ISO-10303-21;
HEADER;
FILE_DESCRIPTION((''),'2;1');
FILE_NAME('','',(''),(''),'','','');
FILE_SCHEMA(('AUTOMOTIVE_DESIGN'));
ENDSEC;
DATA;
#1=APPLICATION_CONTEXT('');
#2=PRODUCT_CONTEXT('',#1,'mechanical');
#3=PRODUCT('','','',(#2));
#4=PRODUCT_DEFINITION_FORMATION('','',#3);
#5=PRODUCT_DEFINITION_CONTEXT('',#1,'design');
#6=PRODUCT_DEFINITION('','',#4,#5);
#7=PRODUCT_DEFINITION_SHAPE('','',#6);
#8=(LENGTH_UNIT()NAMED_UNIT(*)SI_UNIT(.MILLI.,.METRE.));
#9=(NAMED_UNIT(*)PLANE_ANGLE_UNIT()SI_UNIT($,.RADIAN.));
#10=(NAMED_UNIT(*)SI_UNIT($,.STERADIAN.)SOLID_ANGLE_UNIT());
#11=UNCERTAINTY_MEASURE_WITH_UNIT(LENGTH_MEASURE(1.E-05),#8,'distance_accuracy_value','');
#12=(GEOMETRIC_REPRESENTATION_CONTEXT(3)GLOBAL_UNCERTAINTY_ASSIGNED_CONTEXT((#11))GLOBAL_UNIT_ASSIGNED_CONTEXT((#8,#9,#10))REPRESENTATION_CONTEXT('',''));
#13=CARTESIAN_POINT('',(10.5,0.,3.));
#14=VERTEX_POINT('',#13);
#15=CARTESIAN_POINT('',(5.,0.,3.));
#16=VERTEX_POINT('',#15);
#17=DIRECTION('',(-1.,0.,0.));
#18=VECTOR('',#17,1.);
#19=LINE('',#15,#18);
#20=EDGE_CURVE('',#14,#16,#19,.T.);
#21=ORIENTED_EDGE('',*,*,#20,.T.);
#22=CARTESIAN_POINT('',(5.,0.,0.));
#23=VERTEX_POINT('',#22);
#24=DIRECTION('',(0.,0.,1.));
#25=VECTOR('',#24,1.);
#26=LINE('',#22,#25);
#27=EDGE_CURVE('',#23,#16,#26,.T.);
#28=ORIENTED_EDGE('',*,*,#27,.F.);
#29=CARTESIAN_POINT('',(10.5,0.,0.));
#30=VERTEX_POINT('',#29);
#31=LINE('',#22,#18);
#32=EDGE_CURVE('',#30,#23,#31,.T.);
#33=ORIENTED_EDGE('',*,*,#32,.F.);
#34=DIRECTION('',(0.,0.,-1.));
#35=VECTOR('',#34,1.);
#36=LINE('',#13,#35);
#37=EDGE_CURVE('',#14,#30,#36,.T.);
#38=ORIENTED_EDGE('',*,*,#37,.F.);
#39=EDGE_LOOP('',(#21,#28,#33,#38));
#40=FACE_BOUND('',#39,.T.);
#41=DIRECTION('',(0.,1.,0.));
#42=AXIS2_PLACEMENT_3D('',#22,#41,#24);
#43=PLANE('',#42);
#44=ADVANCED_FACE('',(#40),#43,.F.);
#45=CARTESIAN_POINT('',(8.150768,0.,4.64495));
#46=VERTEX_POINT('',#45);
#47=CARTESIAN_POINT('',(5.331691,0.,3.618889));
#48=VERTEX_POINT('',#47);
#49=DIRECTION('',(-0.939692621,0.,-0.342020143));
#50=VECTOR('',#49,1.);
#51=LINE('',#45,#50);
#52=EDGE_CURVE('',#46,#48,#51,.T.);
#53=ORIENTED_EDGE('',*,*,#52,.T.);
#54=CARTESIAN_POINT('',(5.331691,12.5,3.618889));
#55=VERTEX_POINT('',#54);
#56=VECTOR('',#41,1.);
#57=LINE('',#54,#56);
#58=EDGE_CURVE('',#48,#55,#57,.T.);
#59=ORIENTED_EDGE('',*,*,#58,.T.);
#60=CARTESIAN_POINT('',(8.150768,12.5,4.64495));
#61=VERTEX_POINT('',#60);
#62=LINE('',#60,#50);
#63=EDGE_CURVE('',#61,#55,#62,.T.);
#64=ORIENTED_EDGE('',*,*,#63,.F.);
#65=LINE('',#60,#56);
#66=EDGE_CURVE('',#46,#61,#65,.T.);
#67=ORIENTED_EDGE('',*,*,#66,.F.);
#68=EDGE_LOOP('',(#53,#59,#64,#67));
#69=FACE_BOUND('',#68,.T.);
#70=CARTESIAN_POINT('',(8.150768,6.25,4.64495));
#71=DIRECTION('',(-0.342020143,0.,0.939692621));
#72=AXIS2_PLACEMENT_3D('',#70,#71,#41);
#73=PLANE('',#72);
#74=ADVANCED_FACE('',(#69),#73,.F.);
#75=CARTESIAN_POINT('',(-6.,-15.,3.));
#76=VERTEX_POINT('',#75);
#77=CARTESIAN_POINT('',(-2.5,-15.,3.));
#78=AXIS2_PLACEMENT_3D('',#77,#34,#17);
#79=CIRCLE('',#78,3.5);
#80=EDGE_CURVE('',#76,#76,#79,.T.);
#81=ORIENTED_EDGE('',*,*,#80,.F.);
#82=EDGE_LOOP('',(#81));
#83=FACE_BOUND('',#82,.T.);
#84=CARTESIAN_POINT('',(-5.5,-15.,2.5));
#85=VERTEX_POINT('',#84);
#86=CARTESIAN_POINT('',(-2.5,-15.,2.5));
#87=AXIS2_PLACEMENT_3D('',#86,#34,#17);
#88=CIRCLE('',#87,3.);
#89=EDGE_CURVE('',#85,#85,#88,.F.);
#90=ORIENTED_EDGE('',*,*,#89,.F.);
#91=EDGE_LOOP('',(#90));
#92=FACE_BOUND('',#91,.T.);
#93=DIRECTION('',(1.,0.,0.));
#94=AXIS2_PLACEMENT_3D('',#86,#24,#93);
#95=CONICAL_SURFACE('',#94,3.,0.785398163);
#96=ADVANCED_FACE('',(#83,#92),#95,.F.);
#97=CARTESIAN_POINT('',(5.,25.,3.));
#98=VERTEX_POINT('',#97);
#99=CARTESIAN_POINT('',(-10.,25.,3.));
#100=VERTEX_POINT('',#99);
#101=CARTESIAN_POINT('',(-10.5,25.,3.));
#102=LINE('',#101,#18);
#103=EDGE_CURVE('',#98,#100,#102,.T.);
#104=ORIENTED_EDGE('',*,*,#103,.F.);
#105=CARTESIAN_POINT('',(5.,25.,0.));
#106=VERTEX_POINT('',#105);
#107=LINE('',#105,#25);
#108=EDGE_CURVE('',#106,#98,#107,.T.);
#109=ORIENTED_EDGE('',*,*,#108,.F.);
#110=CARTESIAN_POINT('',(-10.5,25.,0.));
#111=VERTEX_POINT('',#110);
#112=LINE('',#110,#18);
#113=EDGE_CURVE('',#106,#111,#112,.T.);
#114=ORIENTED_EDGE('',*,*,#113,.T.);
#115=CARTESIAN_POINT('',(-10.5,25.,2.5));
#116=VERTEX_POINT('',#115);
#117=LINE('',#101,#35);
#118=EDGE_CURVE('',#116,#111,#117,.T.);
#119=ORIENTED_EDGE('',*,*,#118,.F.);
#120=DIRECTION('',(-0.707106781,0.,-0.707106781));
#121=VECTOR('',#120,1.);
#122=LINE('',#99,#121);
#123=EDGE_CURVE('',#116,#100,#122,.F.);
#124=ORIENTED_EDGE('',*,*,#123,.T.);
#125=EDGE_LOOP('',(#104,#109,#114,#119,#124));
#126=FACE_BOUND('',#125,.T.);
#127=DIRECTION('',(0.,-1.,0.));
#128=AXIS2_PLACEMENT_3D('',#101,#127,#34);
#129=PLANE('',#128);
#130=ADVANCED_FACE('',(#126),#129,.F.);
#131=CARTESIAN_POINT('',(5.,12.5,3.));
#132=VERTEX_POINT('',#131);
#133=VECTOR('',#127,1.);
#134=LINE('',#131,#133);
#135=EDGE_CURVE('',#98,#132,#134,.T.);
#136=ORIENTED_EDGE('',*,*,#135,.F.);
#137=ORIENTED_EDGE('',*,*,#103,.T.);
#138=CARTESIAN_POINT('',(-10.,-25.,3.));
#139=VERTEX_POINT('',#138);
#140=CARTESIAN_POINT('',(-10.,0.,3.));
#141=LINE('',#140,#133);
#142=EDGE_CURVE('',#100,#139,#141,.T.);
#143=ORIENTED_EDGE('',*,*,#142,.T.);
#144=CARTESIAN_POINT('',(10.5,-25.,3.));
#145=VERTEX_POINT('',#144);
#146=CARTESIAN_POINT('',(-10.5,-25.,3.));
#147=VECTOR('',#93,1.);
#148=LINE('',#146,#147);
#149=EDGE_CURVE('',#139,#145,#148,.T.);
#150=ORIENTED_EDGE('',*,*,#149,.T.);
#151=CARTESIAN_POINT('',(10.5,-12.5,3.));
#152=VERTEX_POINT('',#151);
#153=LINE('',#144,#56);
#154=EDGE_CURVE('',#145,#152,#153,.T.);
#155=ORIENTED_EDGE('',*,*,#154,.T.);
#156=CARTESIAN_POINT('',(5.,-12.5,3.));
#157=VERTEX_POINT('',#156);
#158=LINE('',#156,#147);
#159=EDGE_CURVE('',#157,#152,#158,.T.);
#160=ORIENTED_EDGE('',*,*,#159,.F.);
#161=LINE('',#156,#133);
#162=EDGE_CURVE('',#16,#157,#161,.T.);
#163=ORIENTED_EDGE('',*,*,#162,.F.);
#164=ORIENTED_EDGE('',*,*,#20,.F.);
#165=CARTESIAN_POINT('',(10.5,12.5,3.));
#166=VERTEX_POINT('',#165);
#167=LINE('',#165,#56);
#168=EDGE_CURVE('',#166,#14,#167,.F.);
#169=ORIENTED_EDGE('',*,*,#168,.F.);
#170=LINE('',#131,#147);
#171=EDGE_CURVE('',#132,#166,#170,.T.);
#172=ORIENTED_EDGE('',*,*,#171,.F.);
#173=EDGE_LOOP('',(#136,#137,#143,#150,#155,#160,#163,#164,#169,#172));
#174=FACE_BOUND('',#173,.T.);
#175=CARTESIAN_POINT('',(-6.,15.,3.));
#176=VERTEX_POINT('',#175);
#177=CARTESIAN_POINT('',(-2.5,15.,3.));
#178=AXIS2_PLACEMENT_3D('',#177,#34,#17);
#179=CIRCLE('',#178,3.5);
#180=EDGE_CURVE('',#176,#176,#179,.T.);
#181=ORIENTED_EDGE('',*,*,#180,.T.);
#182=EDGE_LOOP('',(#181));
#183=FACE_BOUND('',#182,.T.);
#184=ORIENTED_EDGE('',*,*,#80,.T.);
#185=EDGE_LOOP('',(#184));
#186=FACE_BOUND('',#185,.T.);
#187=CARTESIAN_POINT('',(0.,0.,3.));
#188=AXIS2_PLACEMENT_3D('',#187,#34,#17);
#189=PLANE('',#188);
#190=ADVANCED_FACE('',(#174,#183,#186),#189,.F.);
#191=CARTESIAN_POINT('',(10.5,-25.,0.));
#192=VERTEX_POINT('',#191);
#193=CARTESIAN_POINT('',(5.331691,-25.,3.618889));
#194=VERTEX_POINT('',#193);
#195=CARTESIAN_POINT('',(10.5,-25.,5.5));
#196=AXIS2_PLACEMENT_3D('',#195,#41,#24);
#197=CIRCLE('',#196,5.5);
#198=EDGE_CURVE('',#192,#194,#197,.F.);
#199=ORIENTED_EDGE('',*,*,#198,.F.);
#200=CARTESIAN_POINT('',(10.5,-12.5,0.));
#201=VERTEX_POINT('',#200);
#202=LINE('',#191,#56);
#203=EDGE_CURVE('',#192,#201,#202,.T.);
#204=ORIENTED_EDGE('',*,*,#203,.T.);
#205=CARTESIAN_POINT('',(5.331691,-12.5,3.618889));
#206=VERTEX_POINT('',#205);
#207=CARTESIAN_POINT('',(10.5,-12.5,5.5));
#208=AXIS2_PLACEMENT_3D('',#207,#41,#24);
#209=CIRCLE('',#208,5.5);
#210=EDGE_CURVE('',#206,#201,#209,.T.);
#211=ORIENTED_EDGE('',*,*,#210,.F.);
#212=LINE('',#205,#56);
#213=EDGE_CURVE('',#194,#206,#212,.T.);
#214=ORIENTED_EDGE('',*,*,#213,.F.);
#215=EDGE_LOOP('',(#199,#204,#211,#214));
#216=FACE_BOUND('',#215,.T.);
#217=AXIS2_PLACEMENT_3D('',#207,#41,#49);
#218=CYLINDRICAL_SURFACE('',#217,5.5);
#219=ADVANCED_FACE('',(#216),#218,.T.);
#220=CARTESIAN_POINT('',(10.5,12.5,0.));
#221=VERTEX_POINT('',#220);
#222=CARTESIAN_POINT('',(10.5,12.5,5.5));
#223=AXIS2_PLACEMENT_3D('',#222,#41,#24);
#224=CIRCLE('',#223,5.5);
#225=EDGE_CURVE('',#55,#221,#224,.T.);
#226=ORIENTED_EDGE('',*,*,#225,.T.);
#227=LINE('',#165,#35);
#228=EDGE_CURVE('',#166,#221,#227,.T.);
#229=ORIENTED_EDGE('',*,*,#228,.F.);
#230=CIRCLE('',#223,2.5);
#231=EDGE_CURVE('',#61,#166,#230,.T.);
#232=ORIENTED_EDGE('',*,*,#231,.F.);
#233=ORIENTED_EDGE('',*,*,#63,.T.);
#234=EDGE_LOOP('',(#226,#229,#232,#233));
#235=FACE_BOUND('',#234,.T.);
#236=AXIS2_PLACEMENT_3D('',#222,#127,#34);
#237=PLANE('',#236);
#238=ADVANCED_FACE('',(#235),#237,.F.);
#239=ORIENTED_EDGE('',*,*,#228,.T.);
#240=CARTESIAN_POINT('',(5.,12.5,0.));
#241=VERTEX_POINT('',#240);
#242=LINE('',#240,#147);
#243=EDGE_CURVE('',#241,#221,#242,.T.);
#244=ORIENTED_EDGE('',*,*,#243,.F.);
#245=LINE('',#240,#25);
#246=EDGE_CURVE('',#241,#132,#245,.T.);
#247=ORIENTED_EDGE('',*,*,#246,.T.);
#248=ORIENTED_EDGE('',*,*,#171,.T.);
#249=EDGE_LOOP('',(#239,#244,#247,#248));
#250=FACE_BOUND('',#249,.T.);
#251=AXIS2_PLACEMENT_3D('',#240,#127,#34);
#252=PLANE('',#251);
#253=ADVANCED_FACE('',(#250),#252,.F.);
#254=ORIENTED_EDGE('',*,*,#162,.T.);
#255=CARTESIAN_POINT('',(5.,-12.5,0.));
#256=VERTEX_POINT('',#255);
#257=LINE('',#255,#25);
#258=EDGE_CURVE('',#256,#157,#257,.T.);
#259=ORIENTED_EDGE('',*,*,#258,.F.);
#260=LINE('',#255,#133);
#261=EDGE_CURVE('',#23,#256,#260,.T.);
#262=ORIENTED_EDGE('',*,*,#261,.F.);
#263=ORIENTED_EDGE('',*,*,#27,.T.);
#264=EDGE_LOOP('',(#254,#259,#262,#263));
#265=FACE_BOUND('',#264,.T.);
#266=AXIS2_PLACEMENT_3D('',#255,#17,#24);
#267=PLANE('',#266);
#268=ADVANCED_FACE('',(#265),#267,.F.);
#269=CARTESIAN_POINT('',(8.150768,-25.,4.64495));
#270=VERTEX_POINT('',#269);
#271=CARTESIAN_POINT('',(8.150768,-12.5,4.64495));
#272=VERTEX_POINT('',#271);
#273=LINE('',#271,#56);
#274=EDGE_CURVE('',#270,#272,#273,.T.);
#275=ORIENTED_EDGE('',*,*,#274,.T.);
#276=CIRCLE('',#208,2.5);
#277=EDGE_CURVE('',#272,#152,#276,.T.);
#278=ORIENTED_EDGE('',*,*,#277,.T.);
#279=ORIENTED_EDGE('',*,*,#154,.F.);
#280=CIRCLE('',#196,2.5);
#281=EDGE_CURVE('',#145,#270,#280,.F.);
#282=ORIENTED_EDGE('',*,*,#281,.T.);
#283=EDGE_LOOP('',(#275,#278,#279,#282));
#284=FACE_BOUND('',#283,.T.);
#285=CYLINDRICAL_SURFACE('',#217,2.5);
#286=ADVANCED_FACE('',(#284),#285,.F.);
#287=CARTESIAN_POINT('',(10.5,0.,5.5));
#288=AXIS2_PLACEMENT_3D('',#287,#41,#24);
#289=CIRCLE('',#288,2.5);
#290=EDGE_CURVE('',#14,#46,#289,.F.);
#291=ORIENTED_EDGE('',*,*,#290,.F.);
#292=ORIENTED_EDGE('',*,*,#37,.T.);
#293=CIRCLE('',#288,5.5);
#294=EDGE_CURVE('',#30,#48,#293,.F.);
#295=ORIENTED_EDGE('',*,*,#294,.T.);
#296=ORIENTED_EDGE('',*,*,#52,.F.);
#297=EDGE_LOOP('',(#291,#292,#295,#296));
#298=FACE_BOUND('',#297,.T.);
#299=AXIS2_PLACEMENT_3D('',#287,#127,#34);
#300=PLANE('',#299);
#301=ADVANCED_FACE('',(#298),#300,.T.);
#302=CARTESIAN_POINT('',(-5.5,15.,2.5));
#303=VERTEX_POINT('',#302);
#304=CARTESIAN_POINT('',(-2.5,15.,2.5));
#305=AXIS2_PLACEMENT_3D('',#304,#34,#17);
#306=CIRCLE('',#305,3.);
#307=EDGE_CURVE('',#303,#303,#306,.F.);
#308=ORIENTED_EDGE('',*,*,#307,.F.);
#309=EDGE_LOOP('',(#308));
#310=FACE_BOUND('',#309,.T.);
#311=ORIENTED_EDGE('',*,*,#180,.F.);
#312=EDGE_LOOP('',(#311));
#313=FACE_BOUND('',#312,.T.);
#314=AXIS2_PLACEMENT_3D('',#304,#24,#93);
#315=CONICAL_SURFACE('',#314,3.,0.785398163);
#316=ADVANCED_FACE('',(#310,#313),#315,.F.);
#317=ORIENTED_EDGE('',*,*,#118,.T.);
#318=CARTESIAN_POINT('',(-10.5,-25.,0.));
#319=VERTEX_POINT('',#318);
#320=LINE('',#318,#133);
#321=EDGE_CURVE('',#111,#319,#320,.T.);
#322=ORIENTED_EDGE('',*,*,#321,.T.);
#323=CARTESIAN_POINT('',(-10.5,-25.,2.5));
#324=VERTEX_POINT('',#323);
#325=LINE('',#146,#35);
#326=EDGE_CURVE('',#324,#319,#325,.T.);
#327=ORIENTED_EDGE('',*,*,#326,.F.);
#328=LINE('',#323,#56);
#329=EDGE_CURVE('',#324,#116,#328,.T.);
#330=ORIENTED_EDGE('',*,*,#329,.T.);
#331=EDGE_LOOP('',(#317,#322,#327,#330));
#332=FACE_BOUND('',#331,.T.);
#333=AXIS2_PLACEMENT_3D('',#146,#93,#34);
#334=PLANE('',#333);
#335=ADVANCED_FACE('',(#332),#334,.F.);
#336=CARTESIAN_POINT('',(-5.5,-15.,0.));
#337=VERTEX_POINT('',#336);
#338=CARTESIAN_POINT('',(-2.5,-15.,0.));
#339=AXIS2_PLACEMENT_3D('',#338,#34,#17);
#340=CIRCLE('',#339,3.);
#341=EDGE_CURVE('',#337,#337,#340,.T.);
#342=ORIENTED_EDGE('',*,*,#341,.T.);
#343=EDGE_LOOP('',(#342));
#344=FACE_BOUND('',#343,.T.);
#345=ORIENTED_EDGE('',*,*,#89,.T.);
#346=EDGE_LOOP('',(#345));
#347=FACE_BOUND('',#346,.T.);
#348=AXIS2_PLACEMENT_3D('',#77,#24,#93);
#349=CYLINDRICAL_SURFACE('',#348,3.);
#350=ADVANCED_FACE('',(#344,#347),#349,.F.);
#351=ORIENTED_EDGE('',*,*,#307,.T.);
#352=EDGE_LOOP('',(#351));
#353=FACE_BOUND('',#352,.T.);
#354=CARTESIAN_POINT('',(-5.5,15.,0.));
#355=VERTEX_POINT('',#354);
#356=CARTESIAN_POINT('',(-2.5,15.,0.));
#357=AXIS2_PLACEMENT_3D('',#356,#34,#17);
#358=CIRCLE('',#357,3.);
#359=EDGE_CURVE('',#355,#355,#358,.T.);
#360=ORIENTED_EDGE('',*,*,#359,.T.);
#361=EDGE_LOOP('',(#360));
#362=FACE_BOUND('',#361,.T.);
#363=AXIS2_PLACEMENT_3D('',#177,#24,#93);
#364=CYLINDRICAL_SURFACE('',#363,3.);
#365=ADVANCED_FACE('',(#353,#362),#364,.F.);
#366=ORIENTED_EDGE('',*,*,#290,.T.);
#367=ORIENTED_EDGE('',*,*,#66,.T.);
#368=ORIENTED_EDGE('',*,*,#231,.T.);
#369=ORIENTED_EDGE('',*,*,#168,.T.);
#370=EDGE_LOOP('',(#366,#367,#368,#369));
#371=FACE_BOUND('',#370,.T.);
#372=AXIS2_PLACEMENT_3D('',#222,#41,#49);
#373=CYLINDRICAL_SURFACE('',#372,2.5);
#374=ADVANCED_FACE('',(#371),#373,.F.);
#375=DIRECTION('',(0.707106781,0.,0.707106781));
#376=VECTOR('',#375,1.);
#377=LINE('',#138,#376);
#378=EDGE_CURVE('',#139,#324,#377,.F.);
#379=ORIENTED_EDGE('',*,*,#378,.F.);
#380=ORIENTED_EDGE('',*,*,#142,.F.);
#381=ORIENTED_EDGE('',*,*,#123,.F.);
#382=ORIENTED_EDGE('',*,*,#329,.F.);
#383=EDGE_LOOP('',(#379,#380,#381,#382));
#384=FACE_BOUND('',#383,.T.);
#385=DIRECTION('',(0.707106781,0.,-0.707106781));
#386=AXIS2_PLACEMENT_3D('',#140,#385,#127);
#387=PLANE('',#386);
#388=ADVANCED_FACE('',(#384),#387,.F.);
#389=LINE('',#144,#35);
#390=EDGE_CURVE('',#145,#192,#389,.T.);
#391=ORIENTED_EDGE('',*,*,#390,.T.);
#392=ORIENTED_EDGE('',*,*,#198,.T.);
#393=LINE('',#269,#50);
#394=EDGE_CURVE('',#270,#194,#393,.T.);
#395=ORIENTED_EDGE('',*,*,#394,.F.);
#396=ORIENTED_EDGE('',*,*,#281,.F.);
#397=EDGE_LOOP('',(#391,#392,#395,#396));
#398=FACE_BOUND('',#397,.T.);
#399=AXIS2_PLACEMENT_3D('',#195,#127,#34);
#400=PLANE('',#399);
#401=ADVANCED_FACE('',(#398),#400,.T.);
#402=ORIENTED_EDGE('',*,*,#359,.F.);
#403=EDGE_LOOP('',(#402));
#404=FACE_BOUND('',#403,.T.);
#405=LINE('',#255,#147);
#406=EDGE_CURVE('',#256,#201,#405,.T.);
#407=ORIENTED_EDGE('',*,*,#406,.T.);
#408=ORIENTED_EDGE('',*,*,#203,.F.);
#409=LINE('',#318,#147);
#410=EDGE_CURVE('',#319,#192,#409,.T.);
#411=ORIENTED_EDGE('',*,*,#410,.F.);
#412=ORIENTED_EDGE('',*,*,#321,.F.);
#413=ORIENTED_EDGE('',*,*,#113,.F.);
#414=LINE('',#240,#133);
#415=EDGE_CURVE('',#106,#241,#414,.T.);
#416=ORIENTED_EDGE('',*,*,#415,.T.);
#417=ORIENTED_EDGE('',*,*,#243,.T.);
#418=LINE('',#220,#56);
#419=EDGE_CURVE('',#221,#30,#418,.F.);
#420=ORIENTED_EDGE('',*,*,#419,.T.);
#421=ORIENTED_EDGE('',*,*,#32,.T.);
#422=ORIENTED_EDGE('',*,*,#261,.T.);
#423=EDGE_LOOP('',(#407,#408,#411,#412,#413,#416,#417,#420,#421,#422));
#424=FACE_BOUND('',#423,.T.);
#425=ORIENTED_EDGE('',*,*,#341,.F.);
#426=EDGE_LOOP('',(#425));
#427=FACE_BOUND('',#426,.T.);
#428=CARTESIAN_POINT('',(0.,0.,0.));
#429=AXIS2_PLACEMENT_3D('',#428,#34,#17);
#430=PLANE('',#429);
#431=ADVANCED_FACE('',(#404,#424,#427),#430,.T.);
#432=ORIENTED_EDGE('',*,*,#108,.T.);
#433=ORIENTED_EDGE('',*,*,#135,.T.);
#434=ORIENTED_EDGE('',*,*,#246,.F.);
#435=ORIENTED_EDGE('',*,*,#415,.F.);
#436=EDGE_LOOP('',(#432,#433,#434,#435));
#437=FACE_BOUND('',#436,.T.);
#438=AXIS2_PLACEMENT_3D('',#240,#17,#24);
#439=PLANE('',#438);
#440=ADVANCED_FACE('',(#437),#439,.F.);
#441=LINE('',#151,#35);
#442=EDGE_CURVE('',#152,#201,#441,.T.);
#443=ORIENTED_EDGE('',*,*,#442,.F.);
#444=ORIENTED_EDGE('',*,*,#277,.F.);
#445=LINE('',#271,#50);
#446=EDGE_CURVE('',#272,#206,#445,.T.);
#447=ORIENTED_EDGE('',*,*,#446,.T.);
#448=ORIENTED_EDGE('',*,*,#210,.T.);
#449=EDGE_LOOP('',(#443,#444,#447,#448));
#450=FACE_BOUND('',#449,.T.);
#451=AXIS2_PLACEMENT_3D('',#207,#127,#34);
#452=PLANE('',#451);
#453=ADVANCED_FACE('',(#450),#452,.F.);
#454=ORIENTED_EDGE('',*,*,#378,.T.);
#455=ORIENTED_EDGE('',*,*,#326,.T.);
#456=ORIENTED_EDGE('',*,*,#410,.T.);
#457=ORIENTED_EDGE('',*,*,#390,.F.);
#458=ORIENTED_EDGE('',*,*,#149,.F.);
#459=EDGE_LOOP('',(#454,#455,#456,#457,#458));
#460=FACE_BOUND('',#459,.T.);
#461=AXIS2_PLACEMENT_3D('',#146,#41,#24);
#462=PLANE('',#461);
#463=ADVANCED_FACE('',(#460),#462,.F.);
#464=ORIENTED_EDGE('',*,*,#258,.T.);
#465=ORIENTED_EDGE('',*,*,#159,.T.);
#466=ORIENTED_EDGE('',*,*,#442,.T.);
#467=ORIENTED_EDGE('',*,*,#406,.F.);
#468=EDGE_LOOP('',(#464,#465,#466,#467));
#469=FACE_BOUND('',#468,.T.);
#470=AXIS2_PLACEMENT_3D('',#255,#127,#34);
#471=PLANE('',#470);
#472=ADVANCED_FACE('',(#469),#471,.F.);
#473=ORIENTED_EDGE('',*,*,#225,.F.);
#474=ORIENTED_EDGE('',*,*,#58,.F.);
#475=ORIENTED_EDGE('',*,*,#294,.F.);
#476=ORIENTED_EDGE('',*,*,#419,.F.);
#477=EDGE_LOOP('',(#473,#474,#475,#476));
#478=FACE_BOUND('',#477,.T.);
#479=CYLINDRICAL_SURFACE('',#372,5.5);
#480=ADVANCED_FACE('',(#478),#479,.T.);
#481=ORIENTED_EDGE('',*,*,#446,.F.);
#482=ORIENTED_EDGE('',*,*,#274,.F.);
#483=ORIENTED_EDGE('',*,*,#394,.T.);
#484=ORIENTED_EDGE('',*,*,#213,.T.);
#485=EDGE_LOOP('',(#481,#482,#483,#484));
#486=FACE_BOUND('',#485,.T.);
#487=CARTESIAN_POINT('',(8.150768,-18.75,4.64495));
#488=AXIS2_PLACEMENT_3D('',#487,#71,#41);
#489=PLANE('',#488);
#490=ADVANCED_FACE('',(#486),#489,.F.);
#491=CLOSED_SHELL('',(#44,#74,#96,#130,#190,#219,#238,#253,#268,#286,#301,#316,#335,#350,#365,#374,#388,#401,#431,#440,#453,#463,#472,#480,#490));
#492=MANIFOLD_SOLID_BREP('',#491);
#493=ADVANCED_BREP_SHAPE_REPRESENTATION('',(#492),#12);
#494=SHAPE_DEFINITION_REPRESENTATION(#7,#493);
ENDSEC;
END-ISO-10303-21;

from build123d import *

# Parameters (mm, degrees)
SKETCH1_W                    = 21
SKETCH1_H                    = 50
BASE_FLANGE1_DEPTH           = 3
HEM1_START                   = -25
HEM1_DEPTH                   = 12.5
LPATTERN1_COUNT              = 2
LPATTERN1_PITCH              = 25
SKETCH9_W                    = 5.5
SKETCH9_H                    = 12.5
CUT_EXTRUDE5_DEPTH           = 3
F_6_0_6_DIAMETER_HOLE1_D     = 6
F_6_0_6_DIAMETER_HOLE1_DEPTH = 8
F_6_0_6_DIAMETER_HOLE1_TIP   = 1.802581857
CHAMFER1_SIZE                = 0.5


# Read off the part's stored shape, not the designer's step: Hem1
# Sheet-metal steps are written as plain solids
with BuildPart() as part:
    # Sketch1 → Base-Flange1 (new body)
    with BuildSketch(Plane.XY):
        Rectangle(SKETCH1_W, SKETCH1_H)
    extrude(amount=BASE_FLANGE1_DEPTH)

    # Hem1 outline → Hem1 (add)
    with BuildSketch(Plane(origin=(0, 0, 0), x_dir=(1, 0, 0), z_dir=(0, 1, 0)).offset(HEM1_START)):
        with BuildLine():
            Line((8.150768448, -4.644949642), (5.331690586, -3.618889212))
            ThreePointArc((5.331690586, -3.618889212), (13.654670401, -10.005336243), (10.5, 0))
            Line((10.5, 0), (10.5, -3))
            ThreePointArc((10.5, -3), (11.933941091, -7.547880111), (8.150768448, -4.644949642))
        make_face()
    hem1 = extrude(amount=HEM1_DEPTH)

    # LPattern1: Hem1 ×2
    with Locations(*[(0, i * LPATTERN1_PITCH, 0) for i in range(1, LPATTERN1_COUNT)]):
        add(hem1)

    # Sketch9 → Cut-Extrude5 (cut)
    with BuildSketch(Plane.XY.offset(3)):
        with Locations((7.75, 18.75)):
            Rectangle(SKETCH9_W, SKETCH9_H)
        with Locations((7.75, -6.25)):
            Rectangle(SKETCH9_W, SKETCH9_H)
    extrude(amount=-CUT_EXTRUDE5_DEPTH, mode=Mode.SUBTRACT)

    # Ø6.0 (6) Diameter Hole1
    with Locations(Plane(origin=(-2.5, 15, 3), x_dir=(1, 0, 0), z_dir=(0, 0, 1))):
        with Locations((0, 0), (0, -30)):
            Hole(F_6_0_6_DIAMETER_HOLE1_D / 2, depth=F_6_0_6_DIAMETER_HOLE1_DEPTH)
            with Locations((0, 0, -(F_6_0_6_DIAMETER_HOLE1_DEPTH + F_6_0_6_DIAMETER_HOLE1_TIP / 2))):  # 118° drill point
                Cone(0, F_6_0_6_DIAMETER_HOLE1_D / 2, F_6_0_6_DIAMETER_HOLE1_TIP, mode=Mode.SUBTRACT)

    # Chamfer1
    chamfer1_edges = [part.edges().sort_by_distance(p)[0] for p in [
        (-10.5, 0, 3),
        (0.5, -15, 3),
        (0.5, 15, 3),
    ]]
    chamfer(chamfer1_edges, length=CHAMFER1_SIZE)


solid = part.part
